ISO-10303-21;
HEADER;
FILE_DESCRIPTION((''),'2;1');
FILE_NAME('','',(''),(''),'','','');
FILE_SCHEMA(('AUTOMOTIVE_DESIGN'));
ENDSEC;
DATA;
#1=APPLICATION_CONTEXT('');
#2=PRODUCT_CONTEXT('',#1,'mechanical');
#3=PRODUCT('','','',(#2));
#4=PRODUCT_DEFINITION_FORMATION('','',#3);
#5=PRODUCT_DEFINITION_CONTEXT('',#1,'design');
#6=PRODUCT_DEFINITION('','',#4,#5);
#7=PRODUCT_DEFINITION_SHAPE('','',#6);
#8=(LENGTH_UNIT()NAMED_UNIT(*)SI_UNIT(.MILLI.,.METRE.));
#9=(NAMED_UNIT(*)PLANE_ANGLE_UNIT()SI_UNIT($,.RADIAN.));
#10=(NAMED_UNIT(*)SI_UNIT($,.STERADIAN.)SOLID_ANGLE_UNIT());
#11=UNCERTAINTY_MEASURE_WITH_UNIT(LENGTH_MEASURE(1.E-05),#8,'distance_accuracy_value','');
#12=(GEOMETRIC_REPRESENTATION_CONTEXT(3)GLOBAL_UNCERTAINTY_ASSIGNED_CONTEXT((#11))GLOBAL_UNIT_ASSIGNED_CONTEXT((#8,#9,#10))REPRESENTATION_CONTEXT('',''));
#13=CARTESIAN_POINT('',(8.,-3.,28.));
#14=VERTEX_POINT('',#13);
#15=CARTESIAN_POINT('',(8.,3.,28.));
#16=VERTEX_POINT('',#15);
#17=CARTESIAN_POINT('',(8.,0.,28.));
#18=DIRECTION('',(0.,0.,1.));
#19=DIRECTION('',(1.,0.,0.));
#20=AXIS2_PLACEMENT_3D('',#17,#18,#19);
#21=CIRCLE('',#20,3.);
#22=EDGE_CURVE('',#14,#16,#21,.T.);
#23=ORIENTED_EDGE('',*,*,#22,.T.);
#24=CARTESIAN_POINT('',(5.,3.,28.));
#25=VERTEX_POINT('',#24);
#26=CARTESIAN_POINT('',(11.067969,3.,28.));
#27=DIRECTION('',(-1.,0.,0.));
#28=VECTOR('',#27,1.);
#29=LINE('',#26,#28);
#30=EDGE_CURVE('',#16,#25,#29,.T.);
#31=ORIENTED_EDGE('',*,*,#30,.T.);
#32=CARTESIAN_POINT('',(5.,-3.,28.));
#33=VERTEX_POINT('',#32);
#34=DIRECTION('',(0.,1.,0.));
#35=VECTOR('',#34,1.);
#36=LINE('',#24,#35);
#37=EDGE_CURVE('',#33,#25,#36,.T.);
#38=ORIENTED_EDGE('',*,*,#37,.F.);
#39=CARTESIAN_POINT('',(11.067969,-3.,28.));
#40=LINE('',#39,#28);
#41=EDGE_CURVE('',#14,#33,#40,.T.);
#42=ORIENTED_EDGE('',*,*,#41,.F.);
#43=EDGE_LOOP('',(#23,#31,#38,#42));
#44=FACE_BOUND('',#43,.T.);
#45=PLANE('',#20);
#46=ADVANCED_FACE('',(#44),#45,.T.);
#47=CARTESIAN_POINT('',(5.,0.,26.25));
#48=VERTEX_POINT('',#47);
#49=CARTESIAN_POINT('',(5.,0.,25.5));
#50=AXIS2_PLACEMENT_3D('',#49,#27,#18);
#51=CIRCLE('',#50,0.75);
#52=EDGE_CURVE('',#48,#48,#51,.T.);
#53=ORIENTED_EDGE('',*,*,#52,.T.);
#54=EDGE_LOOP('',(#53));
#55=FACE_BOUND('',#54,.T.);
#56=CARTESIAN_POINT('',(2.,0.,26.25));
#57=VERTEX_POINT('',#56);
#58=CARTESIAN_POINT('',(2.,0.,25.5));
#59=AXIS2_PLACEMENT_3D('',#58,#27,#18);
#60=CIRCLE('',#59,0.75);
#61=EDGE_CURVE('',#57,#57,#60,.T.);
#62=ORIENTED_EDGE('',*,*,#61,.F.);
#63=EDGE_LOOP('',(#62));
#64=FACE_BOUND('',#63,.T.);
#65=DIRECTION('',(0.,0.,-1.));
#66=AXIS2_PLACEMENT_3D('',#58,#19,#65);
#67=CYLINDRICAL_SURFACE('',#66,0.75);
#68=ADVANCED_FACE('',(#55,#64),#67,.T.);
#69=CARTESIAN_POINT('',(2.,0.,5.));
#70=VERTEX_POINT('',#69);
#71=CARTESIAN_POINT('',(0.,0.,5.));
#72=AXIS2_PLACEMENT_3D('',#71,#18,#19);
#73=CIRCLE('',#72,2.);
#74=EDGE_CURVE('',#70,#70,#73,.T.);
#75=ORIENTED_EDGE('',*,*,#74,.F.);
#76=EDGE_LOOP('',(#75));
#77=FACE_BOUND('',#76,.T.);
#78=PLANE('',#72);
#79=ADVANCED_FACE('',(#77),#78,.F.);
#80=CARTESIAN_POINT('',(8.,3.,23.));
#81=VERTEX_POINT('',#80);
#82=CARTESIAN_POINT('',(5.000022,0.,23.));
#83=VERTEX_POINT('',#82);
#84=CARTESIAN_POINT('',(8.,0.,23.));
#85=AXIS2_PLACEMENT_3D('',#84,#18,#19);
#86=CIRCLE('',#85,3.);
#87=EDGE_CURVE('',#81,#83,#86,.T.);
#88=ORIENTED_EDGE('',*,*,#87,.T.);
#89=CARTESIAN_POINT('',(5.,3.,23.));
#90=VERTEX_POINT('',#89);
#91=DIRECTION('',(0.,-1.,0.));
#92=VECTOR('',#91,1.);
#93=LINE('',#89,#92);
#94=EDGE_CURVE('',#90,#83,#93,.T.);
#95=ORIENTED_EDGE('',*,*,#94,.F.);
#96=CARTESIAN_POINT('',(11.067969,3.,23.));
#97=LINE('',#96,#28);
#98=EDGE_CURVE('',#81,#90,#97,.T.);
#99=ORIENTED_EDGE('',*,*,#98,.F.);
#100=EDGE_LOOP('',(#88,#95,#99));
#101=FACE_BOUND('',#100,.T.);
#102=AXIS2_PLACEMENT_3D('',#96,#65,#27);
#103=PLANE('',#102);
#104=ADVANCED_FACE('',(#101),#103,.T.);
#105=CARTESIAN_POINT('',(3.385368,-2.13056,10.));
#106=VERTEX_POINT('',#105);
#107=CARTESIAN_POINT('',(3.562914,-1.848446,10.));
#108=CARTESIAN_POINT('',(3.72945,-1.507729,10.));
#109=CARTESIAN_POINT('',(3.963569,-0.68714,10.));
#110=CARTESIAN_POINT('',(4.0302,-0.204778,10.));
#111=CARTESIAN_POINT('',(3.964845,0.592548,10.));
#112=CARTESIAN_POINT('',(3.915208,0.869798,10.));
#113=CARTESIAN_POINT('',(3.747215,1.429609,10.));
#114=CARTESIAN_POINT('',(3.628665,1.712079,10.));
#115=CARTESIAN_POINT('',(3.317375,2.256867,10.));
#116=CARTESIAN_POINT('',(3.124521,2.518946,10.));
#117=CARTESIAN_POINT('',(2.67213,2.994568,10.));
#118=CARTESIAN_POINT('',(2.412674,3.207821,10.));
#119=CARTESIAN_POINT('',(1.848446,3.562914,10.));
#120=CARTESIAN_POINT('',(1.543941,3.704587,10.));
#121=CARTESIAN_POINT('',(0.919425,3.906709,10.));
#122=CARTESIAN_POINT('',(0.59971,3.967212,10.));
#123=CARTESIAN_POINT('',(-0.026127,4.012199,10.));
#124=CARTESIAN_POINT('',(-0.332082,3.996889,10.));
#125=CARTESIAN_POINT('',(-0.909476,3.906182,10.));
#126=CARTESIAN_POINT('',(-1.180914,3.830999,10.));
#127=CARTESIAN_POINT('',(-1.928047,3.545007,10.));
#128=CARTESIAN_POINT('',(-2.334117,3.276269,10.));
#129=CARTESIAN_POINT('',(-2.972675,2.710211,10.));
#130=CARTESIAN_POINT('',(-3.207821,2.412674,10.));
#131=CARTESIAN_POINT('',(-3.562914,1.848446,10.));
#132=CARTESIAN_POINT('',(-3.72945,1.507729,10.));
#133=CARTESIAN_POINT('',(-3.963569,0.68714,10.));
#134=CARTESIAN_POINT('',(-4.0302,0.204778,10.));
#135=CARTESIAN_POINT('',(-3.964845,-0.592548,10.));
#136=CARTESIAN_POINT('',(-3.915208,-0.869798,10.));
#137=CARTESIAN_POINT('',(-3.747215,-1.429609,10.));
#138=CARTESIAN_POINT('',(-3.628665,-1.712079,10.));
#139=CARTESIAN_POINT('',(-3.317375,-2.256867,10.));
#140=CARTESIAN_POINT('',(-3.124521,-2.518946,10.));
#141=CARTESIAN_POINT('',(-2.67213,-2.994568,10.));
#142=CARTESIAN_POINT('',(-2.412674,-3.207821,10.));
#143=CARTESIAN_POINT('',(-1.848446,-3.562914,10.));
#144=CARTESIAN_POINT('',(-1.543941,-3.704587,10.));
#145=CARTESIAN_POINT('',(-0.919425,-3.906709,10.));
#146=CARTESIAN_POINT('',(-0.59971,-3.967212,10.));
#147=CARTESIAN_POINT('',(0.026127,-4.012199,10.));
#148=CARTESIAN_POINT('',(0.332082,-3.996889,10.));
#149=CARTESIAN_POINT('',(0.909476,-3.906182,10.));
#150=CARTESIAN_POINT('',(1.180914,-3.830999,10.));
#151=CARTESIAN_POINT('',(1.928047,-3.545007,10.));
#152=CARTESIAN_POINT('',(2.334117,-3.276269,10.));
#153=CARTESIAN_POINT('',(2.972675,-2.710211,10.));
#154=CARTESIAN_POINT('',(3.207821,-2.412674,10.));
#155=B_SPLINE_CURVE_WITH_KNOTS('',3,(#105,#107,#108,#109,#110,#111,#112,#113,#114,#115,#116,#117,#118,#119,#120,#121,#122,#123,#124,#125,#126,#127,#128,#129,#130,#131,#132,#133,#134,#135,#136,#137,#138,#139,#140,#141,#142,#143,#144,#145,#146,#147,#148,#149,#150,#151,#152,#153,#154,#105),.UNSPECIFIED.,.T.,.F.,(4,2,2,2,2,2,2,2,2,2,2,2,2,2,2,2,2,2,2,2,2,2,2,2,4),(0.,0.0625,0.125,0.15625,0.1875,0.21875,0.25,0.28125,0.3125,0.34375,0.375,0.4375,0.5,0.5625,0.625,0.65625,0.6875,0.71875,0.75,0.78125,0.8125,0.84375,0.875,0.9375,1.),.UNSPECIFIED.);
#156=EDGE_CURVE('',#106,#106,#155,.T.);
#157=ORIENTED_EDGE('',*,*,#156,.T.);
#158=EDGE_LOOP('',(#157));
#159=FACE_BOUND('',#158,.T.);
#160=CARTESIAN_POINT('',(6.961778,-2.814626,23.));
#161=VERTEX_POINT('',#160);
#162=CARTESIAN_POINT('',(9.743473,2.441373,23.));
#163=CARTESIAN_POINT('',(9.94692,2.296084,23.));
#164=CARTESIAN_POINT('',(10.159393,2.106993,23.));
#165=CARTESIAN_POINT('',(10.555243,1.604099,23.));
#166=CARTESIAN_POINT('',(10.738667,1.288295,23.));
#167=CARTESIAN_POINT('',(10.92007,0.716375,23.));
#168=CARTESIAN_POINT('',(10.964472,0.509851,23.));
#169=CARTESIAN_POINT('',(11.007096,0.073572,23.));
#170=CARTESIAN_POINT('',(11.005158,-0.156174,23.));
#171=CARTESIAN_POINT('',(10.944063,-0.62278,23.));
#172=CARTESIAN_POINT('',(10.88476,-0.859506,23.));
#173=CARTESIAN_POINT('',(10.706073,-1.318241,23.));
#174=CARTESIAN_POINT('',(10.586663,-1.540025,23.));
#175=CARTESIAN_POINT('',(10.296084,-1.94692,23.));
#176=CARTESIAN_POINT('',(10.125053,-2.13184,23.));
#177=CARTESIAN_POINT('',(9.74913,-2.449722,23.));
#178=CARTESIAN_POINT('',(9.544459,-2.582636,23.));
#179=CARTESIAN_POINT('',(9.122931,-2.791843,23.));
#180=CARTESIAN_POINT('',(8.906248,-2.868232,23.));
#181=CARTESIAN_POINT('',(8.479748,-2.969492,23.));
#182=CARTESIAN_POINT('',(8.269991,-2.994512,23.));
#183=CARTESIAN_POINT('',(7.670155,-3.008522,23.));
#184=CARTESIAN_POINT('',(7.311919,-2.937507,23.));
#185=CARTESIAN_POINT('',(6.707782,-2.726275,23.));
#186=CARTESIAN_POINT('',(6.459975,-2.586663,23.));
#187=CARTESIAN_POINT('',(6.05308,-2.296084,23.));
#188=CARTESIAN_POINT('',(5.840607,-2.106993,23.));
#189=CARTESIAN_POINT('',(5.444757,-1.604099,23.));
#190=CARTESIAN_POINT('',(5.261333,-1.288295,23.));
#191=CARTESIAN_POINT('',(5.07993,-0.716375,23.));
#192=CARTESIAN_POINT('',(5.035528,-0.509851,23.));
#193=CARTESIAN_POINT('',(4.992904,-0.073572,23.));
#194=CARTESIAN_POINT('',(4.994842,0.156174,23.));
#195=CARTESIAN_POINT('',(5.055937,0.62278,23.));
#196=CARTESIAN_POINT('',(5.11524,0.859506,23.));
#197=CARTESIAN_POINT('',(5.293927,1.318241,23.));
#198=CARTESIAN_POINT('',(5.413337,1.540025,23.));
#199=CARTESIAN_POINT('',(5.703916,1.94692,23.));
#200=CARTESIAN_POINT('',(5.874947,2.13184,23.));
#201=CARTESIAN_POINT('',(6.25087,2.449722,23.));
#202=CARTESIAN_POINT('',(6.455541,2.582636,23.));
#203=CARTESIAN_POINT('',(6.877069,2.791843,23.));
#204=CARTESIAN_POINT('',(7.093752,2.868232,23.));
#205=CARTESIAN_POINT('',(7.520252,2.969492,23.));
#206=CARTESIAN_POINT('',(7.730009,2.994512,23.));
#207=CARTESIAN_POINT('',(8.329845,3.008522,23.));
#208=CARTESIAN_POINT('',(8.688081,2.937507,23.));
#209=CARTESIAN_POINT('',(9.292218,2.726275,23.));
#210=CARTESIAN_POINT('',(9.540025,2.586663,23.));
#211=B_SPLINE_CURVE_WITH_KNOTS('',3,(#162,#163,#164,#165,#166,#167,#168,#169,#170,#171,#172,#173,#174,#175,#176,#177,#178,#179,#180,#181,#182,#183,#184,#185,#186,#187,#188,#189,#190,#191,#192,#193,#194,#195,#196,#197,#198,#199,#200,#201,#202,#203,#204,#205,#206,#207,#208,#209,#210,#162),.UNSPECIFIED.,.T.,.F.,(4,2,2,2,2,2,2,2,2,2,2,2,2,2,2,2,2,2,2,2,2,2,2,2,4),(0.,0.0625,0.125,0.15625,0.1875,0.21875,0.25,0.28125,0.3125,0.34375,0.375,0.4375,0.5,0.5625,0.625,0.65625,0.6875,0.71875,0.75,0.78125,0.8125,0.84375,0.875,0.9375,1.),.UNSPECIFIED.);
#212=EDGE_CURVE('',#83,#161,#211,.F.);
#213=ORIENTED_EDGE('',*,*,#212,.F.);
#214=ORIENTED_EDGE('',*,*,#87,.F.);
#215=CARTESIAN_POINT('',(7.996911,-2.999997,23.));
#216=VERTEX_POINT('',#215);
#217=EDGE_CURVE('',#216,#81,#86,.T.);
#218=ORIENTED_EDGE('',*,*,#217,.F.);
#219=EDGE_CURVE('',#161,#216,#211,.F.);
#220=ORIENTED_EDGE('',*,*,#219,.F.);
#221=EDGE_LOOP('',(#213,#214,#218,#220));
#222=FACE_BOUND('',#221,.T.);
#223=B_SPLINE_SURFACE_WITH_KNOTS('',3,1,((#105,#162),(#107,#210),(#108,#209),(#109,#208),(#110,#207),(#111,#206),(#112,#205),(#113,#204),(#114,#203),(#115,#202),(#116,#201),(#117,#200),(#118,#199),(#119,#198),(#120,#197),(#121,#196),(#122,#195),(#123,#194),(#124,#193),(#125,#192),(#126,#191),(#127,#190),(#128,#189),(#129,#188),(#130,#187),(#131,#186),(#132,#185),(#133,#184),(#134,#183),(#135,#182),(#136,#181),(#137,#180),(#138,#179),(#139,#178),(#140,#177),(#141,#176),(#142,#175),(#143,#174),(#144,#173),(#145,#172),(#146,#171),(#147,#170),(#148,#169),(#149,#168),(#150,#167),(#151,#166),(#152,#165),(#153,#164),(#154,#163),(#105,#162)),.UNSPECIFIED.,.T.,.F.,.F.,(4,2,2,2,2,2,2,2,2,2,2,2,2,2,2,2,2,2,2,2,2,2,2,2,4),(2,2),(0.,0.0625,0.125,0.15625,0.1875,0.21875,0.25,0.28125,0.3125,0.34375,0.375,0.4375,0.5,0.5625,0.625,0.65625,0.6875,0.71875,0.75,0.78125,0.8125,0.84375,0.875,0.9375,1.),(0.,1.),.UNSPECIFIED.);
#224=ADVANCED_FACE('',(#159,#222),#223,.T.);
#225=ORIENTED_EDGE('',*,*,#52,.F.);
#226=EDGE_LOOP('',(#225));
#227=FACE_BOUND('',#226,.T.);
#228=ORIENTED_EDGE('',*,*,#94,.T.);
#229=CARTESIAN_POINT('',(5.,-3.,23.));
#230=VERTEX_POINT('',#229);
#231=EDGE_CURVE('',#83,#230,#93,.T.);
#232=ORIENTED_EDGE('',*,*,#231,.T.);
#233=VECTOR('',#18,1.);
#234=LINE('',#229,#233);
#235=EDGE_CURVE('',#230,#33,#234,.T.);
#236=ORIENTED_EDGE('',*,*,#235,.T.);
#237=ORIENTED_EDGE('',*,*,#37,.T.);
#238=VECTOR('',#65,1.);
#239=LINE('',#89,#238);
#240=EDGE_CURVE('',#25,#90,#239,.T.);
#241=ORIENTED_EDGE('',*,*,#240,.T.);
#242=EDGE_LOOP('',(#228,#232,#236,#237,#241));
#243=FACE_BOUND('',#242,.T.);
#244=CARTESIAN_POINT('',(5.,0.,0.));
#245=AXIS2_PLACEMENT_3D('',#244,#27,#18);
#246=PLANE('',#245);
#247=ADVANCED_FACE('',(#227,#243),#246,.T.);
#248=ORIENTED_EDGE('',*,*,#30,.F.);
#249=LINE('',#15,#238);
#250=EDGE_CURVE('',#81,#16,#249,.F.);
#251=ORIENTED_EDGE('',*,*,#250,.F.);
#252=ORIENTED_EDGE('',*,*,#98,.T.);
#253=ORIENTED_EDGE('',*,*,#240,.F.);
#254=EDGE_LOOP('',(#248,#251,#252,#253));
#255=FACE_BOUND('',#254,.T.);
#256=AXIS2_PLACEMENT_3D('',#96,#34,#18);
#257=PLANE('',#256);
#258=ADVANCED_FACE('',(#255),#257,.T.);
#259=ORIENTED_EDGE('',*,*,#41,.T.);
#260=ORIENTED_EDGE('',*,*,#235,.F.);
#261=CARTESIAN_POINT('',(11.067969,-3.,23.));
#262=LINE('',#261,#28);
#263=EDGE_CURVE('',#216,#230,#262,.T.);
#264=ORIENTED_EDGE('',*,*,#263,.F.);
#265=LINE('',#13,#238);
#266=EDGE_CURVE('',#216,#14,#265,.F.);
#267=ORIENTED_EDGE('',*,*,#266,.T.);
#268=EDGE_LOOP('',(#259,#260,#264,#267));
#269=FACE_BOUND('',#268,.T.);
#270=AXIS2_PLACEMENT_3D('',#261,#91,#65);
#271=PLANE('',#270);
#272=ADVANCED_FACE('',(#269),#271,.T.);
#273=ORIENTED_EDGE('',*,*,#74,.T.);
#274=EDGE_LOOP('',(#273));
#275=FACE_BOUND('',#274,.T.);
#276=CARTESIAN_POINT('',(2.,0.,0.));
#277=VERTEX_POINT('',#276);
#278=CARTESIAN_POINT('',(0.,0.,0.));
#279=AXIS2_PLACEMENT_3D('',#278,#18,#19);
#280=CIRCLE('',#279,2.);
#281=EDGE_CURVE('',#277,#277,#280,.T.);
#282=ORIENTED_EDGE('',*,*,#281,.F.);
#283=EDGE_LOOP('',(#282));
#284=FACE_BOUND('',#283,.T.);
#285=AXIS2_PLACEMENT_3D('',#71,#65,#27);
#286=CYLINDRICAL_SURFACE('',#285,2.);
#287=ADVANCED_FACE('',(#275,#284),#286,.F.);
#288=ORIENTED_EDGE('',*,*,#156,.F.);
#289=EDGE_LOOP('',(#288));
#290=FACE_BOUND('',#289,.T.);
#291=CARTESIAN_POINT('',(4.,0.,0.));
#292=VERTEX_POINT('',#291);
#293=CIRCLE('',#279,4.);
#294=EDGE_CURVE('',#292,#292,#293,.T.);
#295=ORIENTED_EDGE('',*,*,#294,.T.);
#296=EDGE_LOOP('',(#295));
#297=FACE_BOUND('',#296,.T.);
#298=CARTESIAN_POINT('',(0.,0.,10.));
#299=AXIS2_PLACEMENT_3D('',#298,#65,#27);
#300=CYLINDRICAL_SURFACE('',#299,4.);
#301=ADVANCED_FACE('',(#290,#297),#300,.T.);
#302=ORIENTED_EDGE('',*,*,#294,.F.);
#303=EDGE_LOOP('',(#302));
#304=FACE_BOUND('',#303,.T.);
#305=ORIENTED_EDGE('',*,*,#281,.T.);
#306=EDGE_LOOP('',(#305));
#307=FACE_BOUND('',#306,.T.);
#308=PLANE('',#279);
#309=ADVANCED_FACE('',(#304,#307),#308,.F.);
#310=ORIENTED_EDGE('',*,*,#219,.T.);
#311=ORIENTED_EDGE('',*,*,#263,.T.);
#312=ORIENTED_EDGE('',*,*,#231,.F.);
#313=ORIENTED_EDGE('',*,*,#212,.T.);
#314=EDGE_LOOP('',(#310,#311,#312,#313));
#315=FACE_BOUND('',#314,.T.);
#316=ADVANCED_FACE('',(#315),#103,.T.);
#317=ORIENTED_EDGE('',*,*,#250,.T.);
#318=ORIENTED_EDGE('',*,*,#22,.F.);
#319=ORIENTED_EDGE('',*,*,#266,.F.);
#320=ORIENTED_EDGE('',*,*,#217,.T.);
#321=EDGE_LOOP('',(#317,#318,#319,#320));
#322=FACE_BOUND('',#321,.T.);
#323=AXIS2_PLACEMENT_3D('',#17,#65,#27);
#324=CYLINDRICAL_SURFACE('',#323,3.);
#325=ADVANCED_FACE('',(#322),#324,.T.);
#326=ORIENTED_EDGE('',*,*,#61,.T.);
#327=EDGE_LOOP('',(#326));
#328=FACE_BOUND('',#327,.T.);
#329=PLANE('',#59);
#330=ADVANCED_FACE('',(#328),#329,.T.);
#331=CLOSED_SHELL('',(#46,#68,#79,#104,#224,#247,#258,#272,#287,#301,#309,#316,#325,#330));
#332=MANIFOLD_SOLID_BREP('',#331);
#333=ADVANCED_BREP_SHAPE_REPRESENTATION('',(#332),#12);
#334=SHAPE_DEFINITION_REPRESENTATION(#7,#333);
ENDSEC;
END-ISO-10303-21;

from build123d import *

# Parameters (mm, degrees)
SKETCH1_R                            = 4
BOSS_EXTRUDE1_DEPTH                  = 10
SKETCH1_4_R                          = 2
CUT_EXTRUDE1_DEPTH                   = 5
SKETCH6_R                            = 3
BOSS_EXTRUDE2_DEPTH                  = 5
SKETCH7_R                            = 0.75
BOSS_EXTRUDE3_DEPTH                  = 3
BOSS_EXTRUDE3_DIRECTION_2_REACH      = 31.682
BOSS_EXTRUDE3_DIRECTION_2_END_RADIUS = 3
BOSS_EXTRUDE4_REACH                  = 31.682
BOSS_EXTRUDE4_END_RADIUS             = 3
SKETCH9_W                            = 5
SKETCH9_H                            = 6


with BuildPart() as part:
    # Sketch1 → Boss-Extrude1 (new body)
    with BuildSketch(Plane.XY):
        Circle(SKETCH1_R)
    extrude(amount=BOSS_EXTRUDE1_DEPTH)

    # Sketch1<4> → Cut-Extrude1 (cut)
    with BuildSketch(Plane.XY):
        Circle(SKETCH1_4_R)
    extrude(amount=CUT_EXTRUDE1_DEPTH, mode=Mode.SUBTRACT)

    # Loft1: read off the stored shape, not the designer's step
    # Loft1: loft between two sections, ruled curve by curve
    loft1_from = [
        Edge.make_bspline([(3.385367761, -2.130559814, 10), (3.562914412, -1.848445834, 10), (3.729450124, -1.507728827, 10), (3.963569473, -0.68714007, 10), (4.030199805, -0.204777875, 10), (3.964845244, 0.592548145, 10), (3.915208142, 0.869797638, 10), (3.747214936, 1.42960937, 10), (3.628664886, 1.712079095, 10), (3.317375032, 2.25686654, 10), (3.124520878, 2.51894579, 10), (2.672129968, 2.994568423, 10), (2.412673794, 3.20782111, 10), (1.848445834, 3.562914412, 10), (1.543941138, 3.704586936, 10), (0.919424528, 3.906709247, 10), (0.599709563, 3.967212135, 10), (-0.026126607, 4.012199033, 10), (-0.332082278, 3.996889301, 10), (-0.909475606, 3.906181876, 10), (-1.180913753, 3.830999063, 10), (-1.928047455, 3.545007399, 10), (-2.334117327, 3.276269334, 10), (-2.972675278, 2.710211456, 10), (-3.20782111, 2.412673794, 10), (-3.562914412, 1.848445834, 10), (-3.729450124, 1.507728827, 10), (-3.963569473, 0.68714007, 10), (-4.030199805, 0.204777875, 10), (-3.964845244, -0.592548145, 10), (-3.915208142, -0.869797638, 10), (-3.747214936, -1.42960937, 10), (-3.628664886, -1.712079095, 10), (-3.317375032, -2.25686654, 10), (-3.124520878, -2.51894579, 10), (-2.672129968, -2.994568423, 10), (-2.412673794, -3.20782111, 10), (-1.848445834, -3.562914412, 10), (-1.543941138, -3.704586936, 10), (-0.919424528, -3.906709247, 10), (-0.599709563, -3.967212135, 10), (0.026126607, -4.012199033, 10), (0.332082278, -3.996889301, 10), (0.909475606, -3.906181876, 10), (1.180913753, -3.830999063, 10), (1.928047455, -3.545007399, 10), (2.334117327, -3.276269334, 10), (2.972675278, -2.710211456, 10), (3.20782111, -2.412673794, 10), (3.385367761, -2.130559814, 10)], [0, 0, 0, 0, 0.0625, 0.0625, 0.125, 0.125, 0.15625, 0.15625, 0.1875, 0.1875, 0.21875, 0.21875, 0.25, 0.25, 0.28125, 0.28125, 0.3125, 0.3125, 0.34375, 0.34375, 0.375, 0.375, 0.4375, 0.4375, 0.5, 0.5, 0.5625, 0.5625, 0.625, 0.625, 0.65625, 0.65625, 0.6875, 0.6875, 0.71875, 0.71875, 0.75, 0.75, 0.78125, 0.78125, 0.8125, 0.8125, 0.84375, 0.84375, 0.875, 0.875, 0.9375, 0.9375, 1, 1, 1, 1], 3),
    ]
    loft1_to = [
        Edge.make_bspline([(9.743472659, 2.441373197, 23), (9.540024893, 2.586662585, 23), (9.29221759, 2.726274693, 23), (8.688080925, 2.937506534, 23), (8.329845163, 3.008521592, 23), (7.730008732, 2.994512434, 23), (7.520252392, 2.969491752, 23), (7.093752041, 2.868231802, 23), (6.877068802, 2.79184327, 23), (6.455541, 2.582636196, 23), (6.250869976, 2.449721592, 23), (5.874946982, 2.131839906, 23), (5.703916191, 1.946920425, 23), (5.413337415, 1.540024893, 23), (5.293926981, 1.318241454, 23), (5.115239974, 0.859506435, 23), (5.055936651, 0.622779512, 23), (4.994842263, 0.156173936, 23), (4.99290402, -0.073571743, 23), (5.035528487, -0.509850646, 23), (5.07993029, -0.716374826, 23), (5.261333283, -1.288295235, 23), (5.444756854, -1.604098645, 23), (5.840606651, -2.106993204, 23), (6.053079575, -2.296083809, 23), (6.459975107, -2.586662585, 23), (6.70778241, -2.726274693, 23), (7.311919075, -2.937506534, 23), (7.670154837, -3.008521592, 23), (8.269991268, -2.994512434, 23), (8.479747608, -2.969491752, 23), (8.906247959, -2.868231802, 23), (9.122931198, -2.79184327, 23), (9.544459, -2.582636196, 23), (9.749130024, -2.449721592, 23), (10.125053018, -2.131839906, 23), (10.296083809, -1.946920425, 23), (10.586662585, -1.540024893, 23), (10.706073019, -1.318241454, 23), (10.884760026, -0.859506435, 23), (10.944063349, -0.622779512, 23), (11.005157737, -0.156173936, 23), (11.00709598, 0.073571743, 23), (10.964471513, 0.509850646, 23), (10.92006971, 0.716374826, 23), (10.738666717, 1.288295235, 23), (10.555243146, 1.604098645, 23), (10.159393349, 2.106993204, 23), (9.946920425, 2.296083809, 23), (9.743472659, 2.441373197, 23)], [0, 0, 0, 0, 0.0625, 0.0625, 0.125, 0.125, 0.15625, 0.15625, 0.1875, 0.1875, 0.21875, 0.21875, 0.25, 0.25, 0.28125, 0.28125, 0.3125, 0.3125, 0.34375, 0.34375, 0.375, 0.375, 0.4375, 0.4375, 0.5, 0.5, 0.5625, 0.5625, 0.625, 0.625, 0.65625, 0.65625, 0.6875, 0.6875, 0.71875, 0.71875, 0.75, 0.75, 0.78125, 0.78125, 0.8125, 0.8125, 0.84375, 0.84375, 0.875, 0.875, 0.9375, 0.9375, 1, 1, 1, 1], 3),
    ]
    loft1 = Solid(Shell([*[Face.make_surface_from_curves(loft1_from[k], loft1_to[k]) for k in range(1)], Face(Wire(loft1_from)), Face(Wire(loft1_to))]))
    add(loft1)

    # Sketch6 → Boss-Extrude2 (add)
    with BuildSketch(Plane.XY.offset(23)):
        with Locations((8, 0)):
            Circle(SKETCH6_R)
    extrude(amount=BOSS_EXTRUDE2_DEPTH)

    # Sketch7 → Boss-Extrude3 (add)
    with BuildSketch(Plane.ZY.offset(-5)):
        with Locations((25.5, 0)):
            Circle(SKETCH7_R)
    extrude(amount=BOSS_EXTRUDE3_DEPTH)

    # Boss-Extrude3 direction 2: up to this cylinder (the profile starts outside it)
    boss_extrude3_direction_2_end = Plane(origin=(8, 0, 25.5), z_dir=(0, 0, -1)) * Cylinder(BOSS_EXTRUDE3_DIRECTION_2_END_RADIUS, 70.364, mode=Mode.PRIVATE)
    # Sketch7 → Boss-Extrude3 direction 2 (add, up to the surface)
    with BuildSketch(Plane.ZY.offset(-5), mode=Mode.PRIVATE) as boss_extrude3_direction_2_sk1:
        with Locations((25.5, 0)):
            Circle(SKETCH7_R)
    boss_extrude3_direction_2_tool1 = extrude(boss_extrude3_direction_2_sk1.sketch, amount=-BOSS_EXTRUDE3_DIRECTION_2_REACH, mode=Mode.PRIVATE) - boss_extrude3_direction_2_end
    add(boss_extrude3_direction_2_tool1.solids().sort_by_distance((5, 0, 25.5))[0])
    add(boss_extrude3_direction_2_tool1.solids().sort_by_distance((5, 0, 25.5))[1])

    # Boss-Extrude4: up to this cylinder (the profile starts outside it)
    boss_extrude4_end = Plane(origin=(8, 0, 25.5), z_dir=(0, 0, -1)) * Cylinder(BOSS_EXTRUDE4_END_RADIUS, 70.364, mode=Mode.PRIVATE)
    # Sketch9 → Boss-Extrude4 (add, up to the surface)
    with BuildSketch(Plane.ZY.offset(-5), mode=Mode.PRIVATE) as boss_extrude4_sk1:
        with Locations((25.5, 0)):
            Rectangle(SKETCH9_W, SKETCH9_H)
    boss_extrude4_tool1 = extrude(boss_extrude4_sk1.sketch, amount=-BOSS_EXTRUDE4_REACH, mode=Mode.PRIVATE) - boss_extrude4_end
    add(boss_extrude4_tool1.solids().sort_by_distance((5, 0, 25.5))[0])
    add(boss_extrude4_tool1.solids().sort_by_distance((5, 0, 25.5))[1])


solid = part.part
